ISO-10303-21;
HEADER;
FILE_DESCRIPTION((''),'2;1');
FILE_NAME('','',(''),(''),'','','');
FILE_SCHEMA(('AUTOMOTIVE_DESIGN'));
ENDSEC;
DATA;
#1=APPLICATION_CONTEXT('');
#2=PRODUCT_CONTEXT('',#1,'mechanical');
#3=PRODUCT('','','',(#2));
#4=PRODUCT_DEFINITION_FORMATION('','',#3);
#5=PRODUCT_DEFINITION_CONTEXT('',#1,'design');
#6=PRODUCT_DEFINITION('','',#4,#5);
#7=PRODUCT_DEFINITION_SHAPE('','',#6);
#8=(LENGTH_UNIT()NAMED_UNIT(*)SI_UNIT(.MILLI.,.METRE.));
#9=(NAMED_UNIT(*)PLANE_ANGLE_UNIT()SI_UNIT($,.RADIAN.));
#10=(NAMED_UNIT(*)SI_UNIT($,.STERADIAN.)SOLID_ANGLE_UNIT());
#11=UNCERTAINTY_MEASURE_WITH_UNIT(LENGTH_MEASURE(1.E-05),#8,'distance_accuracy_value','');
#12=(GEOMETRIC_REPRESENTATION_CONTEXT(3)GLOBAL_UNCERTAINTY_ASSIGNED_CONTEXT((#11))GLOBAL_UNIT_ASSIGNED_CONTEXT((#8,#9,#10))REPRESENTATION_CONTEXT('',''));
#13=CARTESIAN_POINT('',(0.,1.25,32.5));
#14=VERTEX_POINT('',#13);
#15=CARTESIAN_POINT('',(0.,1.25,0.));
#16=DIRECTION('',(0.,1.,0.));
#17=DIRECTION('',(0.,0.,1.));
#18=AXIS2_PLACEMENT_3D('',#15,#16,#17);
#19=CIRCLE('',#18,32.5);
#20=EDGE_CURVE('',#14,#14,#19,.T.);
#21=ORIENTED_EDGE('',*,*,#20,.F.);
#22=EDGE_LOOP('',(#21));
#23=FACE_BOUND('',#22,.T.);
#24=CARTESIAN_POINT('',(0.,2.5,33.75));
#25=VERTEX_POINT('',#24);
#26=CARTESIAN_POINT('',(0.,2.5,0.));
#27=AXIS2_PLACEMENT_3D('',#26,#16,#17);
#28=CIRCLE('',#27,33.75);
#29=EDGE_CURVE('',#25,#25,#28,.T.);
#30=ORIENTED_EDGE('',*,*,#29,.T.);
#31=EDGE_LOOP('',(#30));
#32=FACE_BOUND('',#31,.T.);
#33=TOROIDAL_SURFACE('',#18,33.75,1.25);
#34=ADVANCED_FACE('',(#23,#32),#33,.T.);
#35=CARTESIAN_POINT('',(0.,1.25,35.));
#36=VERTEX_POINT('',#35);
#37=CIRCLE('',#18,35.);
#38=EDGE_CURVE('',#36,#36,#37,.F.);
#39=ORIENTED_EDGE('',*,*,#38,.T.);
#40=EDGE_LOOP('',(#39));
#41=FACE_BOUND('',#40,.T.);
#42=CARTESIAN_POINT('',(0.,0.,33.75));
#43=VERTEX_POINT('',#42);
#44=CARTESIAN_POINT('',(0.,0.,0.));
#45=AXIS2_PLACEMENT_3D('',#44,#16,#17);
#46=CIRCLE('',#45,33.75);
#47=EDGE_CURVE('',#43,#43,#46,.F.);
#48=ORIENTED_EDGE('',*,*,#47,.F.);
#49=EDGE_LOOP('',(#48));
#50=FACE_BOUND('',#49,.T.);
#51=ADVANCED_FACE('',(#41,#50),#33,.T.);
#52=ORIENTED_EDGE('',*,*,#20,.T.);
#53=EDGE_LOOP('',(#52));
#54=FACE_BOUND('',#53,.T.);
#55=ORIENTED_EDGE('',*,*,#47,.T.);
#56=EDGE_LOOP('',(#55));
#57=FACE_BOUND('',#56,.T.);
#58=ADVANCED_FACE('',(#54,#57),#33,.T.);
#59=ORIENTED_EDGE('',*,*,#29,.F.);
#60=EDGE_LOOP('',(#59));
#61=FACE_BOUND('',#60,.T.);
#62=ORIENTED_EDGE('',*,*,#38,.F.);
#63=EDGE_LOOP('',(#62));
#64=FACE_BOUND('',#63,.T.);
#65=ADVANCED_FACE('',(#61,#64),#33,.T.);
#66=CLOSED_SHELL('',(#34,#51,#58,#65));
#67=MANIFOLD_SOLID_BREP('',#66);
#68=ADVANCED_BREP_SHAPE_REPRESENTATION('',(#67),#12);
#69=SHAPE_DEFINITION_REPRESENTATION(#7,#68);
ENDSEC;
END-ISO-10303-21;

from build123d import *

# Parameters (mm, degrees)
ESBO_O1_R                = 35
ESBO_O1_R_2              = 32.5
RESSALTO_EXTRUS_O1_DEPTH = 2.5
FILETE3_R                = 1.25


with BuildPart() as part:
    # Esboço1 → Ressalto-extrusão1 (new body)
    with BuildSketch(Plane(origin=(0, 0, 0), x_dir=(1, 0, 0), z_dir=(0, 1, 0))):
        with Locations(Location((0, 0, 0), (0, 0, 270))):
            Circle(ESBO_O1_R)
        with Locations(Location((0, 0, 0), (0, 0, 270))):
            Circle(ESBO_O1_R_2, mode=Mode.SUBTRACT)
    extrude(amount=RESSALTO_EXTRUS_O1_DEPTH)

    # Filete3
    filete3_edges = [part.edges().sort_by_distance(p)[0] for p in [
        (0, 0, -35),
        (0, 2.5, -35),
        (0, 0, -32.5),
        (0, 2.5, -32.5),
    ]]
    fillet(filete3_edges, radius=FILETE3_R - 0.0001)  # a hair under: the kernel refuses the full size


solid = part.part
